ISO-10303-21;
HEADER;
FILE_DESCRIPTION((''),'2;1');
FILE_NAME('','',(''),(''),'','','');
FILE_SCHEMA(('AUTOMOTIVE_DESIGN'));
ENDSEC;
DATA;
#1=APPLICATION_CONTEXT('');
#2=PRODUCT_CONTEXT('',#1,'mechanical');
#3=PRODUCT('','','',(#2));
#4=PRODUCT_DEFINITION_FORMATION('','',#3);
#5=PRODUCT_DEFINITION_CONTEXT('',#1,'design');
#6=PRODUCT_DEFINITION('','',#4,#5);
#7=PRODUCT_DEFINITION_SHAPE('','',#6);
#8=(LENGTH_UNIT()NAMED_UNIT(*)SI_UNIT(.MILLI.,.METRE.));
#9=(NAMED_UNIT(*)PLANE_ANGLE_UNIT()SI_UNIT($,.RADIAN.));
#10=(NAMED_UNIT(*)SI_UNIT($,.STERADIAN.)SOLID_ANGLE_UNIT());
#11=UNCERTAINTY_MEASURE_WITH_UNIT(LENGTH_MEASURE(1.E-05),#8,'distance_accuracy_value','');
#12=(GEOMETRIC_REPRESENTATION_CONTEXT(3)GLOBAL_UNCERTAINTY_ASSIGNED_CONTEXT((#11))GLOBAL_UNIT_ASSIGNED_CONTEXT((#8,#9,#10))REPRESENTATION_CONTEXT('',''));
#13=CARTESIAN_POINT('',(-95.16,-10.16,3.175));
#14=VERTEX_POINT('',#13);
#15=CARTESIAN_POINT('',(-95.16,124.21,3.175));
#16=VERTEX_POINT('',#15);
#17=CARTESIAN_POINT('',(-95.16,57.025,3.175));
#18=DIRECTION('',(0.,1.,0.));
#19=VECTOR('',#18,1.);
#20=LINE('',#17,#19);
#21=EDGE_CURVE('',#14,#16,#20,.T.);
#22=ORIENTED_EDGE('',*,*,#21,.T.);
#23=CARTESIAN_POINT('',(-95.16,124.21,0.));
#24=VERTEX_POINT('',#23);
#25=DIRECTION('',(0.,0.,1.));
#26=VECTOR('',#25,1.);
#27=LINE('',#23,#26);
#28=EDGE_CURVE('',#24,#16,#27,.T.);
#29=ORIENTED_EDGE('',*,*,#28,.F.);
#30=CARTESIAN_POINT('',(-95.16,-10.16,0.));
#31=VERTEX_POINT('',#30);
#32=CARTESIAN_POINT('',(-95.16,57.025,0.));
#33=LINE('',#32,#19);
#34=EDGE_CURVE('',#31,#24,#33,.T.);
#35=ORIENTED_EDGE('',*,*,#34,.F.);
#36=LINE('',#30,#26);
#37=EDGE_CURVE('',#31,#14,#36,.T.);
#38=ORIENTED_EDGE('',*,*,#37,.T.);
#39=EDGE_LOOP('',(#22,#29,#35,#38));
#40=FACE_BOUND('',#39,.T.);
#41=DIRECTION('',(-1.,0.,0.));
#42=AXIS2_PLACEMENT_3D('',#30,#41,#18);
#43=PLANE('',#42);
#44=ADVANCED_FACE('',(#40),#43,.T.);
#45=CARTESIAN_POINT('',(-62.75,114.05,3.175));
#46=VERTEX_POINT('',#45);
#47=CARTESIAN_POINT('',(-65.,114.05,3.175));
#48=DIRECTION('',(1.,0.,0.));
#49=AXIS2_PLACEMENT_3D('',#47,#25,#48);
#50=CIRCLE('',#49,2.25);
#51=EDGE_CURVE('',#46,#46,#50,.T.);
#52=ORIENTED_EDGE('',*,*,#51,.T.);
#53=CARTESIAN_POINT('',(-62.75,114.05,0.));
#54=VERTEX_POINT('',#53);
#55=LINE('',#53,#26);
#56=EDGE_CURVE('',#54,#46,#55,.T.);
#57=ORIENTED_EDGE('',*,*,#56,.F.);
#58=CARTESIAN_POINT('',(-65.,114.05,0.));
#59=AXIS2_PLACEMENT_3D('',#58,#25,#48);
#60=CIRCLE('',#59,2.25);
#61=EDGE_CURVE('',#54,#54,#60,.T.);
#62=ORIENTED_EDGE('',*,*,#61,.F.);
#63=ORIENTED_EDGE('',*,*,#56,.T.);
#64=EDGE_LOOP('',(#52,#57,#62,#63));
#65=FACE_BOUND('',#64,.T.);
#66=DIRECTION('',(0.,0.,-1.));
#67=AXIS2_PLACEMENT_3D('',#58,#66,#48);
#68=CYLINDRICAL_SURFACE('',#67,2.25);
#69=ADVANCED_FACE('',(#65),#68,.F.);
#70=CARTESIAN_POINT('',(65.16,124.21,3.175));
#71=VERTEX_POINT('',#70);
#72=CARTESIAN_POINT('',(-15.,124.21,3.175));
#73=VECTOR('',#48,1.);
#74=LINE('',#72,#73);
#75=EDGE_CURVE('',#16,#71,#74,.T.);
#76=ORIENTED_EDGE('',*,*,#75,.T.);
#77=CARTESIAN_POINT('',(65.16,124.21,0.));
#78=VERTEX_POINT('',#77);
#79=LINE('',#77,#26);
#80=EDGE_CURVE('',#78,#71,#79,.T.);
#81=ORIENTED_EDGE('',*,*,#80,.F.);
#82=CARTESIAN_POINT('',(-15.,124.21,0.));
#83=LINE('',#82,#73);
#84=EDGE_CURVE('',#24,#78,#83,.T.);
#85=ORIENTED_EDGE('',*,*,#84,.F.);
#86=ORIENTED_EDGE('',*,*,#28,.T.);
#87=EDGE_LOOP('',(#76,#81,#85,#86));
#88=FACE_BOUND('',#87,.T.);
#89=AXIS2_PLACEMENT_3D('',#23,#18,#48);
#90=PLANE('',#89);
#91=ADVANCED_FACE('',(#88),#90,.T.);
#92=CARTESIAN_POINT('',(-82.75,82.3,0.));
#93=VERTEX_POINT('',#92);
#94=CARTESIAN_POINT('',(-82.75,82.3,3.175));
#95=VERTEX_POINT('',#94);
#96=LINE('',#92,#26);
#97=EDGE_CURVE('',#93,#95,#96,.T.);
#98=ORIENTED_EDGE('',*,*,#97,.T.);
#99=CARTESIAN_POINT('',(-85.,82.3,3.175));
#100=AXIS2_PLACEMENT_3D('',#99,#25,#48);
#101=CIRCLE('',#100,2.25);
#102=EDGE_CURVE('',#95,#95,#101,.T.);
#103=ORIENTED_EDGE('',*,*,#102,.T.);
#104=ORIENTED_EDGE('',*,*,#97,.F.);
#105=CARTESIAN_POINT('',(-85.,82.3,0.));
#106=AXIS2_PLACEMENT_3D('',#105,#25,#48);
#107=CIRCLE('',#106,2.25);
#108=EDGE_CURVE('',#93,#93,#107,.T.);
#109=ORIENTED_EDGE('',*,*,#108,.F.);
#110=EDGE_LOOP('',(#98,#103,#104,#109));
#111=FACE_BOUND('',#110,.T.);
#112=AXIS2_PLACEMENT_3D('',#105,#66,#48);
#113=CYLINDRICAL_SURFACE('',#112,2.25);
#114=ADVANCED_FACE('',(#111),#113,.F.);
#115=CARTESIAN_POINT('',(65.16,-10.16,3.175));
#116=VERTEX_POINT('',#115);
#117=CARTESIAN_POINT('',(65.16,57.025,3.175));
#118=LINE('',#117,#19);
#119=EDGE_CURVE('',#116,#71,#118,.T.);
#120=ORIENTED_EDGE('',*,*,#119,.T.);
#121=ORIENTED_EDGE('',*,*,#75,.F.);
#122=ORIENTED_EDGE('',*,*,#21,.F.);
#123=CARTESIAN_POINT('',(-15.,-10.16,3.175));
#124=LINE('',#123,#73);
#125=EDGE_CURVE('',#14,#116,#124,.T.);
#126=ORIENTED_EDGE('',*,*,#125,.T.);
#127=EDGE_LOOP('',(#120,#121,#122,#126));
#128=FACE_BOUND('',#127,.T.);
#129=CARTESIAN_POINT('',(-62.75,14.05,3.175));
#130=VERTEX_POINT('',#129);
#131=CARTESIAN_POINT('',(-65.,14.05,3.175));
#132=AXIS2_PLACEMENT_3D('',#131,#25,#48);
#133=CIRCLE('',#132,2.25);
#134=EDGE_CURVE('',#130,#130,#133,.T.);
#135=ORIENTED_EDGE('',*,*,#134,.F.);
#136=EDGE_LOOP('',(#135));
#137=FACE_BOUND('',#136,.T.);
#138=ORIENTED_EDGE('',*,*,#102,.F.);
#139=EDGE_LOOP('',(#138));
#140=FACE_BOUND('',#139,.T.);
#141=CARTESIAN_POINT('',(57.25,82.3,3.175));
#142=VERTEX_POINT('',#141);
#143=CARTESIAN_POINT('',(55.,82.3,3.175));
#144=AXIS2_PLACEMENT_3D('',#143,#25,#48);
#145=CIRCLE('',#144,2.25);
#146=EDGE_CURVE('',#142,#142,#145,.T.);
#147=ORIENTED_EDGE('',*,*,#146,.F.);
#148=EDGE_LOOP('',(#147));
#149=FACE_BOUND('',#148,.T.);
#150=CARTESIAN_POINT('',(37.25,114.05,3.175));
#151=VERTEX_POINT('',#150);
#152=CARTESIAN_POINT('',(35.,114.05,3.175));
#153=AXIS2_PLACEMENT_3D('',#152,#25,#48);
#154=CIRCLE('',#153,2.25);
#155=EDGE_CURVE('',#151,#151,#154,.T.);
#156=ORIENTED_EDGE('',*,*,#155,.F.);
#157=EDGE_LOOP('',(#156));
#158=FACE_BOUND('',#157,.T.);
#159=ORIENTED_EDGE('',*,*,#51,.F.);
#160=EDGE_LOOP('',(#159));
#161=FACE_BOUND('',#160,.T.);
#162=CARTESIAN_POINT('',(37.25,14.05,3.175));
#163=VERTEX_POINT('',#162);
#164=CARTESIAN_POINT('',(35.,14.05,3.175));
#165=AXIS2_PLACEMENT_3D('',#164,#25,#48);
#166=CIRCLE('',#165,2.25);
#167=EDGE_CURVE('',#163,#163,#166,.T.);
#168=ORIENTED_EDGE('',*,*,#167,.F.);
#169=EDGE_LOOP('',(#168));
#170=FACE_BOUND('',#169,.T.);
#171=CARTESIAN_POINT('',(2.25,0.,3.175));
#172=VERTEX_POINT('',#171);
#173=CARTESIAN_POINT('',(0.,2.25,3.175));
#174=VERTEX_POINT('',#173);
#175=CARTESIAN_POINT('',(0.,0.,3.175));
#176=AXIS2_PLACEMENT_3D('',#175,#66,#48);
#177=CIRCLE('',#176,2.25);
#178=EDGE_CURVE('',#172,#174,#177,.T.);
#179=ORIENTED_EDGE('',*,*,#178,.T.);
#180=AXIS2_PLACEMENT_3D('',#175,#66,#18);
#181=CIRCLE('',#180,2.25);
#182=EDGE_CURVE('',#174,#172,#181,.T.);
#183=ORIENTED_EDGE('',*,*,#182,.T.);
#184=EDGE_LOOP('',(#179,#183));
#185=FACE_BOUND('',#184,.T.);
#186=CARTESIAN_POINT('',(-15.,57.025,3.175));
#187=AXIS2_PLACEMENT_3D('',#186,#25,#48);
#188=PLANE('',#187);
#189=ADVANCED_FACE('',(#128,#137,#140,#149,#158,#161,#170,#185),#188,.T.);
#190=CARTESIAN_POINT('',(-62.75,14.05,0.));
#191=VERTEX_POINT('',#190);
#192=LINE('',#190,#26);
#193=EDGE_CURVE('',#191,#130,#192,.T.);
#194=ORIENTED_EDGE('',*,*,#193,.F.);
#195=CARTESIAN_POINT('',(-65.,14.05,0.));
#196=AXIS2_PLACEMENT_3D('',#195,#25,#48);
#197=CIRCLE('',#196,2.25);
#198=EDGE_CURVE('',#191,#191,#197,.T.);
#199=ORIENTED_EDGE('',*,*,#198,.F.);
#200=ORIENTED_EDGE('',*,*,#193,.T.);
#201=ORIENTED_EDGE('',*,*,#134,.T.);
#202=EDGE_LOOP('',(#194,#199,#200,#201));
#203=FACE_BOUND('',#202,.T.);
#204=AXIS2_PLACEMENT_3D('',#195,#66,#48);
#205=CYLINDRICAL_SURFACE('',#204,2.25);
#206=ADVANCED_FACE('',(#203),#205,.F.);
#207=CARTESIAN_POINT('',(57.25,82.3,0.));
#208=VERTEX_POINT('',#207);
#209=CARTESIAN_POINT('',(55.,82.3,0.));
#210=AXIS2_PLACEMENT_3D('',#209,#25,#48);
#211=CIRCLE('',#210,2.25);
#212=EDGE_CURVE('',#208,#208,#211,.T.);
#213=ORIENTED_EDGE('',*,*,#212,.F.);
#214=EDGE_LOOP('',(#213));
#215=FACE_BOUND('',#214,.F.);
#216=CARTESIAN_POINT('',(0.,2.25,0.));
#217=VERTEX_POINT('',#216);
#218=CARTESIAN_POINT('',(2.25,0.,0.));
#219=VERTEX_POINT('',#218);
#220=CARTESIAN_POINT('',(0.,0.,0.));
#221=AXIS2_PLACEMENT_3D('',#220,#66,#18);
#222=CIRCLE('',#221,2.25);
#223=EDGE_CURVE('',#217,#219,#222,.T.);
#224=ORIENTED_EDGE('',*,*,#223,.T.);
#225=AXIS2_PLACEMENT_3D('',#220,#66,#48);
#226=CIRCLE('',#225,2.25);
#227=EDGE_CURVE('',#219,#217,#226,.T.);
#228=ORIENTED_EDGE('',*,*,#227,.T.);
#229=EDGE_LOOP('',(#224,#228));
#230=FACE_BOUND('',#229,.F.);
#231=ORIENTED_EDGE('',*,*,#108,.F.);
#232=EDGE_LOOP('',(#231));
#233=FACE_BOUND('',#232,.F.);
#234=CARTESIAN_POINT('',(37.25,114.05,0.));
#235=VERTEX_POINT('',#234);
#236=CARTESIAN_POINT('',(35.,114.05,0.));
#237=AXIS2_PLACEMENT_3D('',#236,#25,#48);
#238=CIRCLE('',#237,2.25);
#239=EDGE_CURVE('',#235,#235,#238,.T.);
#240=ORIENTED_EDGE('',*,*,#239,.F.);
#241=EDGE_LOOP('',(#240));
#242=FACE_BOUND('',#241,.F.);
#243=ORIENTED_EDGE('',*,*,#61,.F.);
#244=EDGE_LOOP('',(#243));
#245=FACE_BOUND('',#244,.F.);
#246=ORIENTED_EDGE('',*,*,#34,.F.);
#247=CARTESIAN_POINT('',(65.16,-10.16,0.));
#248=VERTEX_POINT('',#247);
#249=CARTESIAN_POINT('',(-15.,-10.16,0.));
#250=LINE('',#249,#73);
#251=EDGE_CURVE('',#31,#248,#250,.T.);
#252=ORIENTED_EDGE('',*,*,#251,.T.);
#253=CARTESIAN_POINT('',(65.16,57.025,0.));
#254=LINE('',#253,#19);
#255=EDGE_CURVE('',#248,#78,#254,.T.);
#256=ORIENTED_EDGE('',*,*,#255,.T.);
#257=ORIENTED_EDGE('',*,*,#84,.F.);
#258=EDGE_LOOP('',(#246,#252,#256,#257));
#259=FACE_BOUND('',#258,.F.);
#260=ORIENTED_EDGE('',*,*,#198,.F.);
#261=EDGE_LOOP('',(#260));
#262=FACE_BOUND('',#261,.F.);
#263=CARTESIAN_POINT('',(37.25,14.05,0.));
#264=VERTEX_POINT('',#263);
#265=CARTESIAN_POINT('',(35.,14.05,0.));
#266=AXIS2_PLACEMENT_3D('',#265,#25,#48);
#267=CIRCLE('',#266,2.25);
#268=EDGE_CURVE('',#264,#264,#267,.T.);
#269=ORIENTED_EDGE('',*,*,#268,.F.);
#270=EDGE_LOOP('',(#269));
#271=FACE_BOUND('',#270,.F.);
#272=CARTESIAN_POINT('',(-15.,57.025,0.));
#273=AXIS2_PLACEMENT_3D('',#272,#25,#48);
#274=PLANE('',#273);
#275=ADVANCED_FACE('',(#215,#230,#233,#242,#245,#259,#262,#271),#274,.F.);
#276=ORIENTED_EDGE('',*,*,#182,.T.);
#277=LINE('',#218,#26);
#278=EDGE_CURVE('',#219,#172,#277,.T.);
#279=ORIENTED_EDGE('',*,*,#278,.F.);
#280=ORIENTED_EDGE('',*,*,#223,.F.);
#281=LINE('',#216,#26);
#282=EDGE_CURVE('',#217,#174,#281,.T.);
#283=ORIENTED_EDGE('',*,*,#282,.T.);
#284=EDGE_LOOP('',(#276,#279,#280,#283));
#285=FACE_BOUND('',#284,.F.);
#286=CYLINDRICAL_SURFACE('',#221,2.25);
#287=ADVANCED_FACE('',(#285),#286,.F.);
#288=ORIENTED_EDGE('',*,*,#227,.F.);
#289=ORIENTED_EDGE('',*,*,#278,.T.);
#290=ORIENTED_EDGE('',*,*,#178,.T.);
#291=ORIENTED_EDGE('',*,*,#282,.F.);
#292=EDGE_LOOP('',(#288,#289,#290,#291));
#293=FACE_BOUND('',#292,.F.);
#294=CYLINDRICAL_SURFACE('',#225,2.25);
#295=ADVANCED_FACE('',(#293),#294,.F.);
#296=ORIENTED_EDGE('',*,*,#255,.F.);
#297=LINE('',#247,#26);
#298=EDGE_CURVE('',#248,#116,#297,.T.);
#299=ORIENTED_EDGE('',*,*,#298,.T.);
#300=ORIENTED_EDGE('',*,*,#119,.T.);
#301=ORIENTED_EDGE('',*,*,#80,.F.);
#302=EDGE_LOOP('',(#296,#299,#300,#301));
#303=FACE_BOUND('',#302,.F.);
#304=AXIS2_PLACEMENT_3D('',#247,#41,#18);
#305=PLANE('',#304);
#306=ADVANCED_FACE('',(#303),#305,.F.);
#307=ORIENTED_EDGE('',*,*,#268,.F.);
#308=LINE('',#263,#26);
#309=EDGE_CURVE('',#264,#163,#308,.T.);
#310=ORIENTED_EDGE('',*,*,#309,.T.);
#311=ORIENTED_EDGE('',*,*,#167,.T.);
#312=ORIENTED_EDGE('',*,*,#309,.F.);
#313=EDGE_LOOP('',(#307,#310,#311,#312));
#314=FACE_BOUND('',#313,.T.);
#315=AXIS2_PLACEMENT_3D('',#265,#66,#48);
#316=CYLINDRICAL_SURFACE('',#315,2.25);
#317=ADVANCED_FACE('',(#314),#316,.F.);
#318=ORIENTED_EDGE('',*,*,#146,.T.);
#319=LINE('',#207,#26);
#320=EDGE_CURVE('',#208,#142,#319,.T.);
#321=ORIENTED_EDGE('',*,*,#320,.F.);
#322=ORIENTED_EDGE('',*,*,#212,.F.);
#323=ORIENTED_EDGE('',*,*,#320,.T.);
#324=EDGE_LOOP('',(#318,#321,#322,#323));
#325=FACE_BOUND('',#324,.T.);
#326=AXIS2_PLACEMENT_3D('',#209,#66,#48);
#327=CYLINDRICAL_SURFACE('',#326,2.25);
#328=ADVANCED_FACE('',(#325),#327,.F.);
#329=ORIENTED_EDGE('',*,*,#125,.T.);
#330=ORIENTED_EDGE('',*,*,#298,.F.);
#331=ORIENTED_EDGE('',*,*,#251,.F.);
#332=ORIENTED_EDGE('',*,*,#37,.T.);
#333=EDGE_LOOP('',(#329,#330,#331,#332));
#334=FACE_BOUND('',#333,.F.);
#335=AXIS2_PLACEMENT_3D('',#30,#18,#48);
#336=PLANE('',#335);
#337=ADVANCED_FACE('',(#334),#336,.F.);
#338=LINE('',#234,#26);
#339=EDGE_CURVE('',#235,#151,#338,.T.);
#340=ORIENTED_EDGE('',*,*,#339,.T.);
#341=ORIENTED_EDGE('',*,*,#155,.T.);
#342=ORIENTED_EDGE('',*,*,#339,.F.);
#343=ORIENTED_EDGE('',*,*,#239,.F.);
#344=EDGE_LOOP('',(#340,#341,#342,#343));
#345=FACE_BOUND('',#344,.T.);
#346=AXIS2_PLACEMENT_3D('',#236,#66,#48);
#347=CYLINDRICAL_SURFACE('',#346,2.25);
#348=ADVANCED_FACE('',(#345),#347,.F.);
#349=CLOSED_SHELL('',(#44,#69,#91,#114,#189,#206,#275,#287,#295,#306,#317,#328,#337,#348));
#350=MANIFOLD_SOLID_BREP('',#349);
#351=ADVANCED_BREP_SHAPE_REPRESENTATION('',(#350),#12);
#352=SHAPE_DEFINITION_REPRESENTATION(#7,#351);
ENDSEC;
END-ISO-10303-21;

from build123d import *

# Parameters (mm, degrees)
F0_W     = 160.32
F0_H     = 134.37
F0_R     = 2.25
F1_DEPTH = 3.175


# Not quite as in the source:
# - a length typed as a fraction of an inch, garbled in the dataset ("3 / 203.2 mm" for 3/8 in), is restored


with BuildPart() as f1:
    # F0 (on Top) → F1 (new body)
    with BuildSketch(Plane.XY):
        with Locations((-15, 57.025)):
            Rectangle(F0_W, F0_H)
        with Locations((-65, 14.05)):
            Circle(F0_R, mode=Mode.SUBTRACT)
        with BuildLine():
            ThreePointArc((0, 2.25), (1.5909902577, 1.5909902577), (2.25, 0))
            ThreePointArc((2.25, 0), (-1.5909902577, -1.5909902577), (0, 2.25))
        make_face(mode=Mode.SUBTRACT)
        with Locations((35, 14.05)):
            Circle(F0_R, mode=Mode.SUBTRACT)
        with Locations((-85, 82.3)):
            Circle(F0_R, mode=Mode.SUBTRACT)
        with Locations((-65, 114.05)):
            Circle(F0_R, mode=Mode.SUBTRACT)
        with Locations((55, 82.3)):
            Circle(F0_R, mode=Mode.SUBTRACT)
        with Locations((35, 114.05)):
            Circle(F0_R, mode=Mode.SUBTRACT)
    extrude(amount=F1_DEPTH)


solid = f1.part
